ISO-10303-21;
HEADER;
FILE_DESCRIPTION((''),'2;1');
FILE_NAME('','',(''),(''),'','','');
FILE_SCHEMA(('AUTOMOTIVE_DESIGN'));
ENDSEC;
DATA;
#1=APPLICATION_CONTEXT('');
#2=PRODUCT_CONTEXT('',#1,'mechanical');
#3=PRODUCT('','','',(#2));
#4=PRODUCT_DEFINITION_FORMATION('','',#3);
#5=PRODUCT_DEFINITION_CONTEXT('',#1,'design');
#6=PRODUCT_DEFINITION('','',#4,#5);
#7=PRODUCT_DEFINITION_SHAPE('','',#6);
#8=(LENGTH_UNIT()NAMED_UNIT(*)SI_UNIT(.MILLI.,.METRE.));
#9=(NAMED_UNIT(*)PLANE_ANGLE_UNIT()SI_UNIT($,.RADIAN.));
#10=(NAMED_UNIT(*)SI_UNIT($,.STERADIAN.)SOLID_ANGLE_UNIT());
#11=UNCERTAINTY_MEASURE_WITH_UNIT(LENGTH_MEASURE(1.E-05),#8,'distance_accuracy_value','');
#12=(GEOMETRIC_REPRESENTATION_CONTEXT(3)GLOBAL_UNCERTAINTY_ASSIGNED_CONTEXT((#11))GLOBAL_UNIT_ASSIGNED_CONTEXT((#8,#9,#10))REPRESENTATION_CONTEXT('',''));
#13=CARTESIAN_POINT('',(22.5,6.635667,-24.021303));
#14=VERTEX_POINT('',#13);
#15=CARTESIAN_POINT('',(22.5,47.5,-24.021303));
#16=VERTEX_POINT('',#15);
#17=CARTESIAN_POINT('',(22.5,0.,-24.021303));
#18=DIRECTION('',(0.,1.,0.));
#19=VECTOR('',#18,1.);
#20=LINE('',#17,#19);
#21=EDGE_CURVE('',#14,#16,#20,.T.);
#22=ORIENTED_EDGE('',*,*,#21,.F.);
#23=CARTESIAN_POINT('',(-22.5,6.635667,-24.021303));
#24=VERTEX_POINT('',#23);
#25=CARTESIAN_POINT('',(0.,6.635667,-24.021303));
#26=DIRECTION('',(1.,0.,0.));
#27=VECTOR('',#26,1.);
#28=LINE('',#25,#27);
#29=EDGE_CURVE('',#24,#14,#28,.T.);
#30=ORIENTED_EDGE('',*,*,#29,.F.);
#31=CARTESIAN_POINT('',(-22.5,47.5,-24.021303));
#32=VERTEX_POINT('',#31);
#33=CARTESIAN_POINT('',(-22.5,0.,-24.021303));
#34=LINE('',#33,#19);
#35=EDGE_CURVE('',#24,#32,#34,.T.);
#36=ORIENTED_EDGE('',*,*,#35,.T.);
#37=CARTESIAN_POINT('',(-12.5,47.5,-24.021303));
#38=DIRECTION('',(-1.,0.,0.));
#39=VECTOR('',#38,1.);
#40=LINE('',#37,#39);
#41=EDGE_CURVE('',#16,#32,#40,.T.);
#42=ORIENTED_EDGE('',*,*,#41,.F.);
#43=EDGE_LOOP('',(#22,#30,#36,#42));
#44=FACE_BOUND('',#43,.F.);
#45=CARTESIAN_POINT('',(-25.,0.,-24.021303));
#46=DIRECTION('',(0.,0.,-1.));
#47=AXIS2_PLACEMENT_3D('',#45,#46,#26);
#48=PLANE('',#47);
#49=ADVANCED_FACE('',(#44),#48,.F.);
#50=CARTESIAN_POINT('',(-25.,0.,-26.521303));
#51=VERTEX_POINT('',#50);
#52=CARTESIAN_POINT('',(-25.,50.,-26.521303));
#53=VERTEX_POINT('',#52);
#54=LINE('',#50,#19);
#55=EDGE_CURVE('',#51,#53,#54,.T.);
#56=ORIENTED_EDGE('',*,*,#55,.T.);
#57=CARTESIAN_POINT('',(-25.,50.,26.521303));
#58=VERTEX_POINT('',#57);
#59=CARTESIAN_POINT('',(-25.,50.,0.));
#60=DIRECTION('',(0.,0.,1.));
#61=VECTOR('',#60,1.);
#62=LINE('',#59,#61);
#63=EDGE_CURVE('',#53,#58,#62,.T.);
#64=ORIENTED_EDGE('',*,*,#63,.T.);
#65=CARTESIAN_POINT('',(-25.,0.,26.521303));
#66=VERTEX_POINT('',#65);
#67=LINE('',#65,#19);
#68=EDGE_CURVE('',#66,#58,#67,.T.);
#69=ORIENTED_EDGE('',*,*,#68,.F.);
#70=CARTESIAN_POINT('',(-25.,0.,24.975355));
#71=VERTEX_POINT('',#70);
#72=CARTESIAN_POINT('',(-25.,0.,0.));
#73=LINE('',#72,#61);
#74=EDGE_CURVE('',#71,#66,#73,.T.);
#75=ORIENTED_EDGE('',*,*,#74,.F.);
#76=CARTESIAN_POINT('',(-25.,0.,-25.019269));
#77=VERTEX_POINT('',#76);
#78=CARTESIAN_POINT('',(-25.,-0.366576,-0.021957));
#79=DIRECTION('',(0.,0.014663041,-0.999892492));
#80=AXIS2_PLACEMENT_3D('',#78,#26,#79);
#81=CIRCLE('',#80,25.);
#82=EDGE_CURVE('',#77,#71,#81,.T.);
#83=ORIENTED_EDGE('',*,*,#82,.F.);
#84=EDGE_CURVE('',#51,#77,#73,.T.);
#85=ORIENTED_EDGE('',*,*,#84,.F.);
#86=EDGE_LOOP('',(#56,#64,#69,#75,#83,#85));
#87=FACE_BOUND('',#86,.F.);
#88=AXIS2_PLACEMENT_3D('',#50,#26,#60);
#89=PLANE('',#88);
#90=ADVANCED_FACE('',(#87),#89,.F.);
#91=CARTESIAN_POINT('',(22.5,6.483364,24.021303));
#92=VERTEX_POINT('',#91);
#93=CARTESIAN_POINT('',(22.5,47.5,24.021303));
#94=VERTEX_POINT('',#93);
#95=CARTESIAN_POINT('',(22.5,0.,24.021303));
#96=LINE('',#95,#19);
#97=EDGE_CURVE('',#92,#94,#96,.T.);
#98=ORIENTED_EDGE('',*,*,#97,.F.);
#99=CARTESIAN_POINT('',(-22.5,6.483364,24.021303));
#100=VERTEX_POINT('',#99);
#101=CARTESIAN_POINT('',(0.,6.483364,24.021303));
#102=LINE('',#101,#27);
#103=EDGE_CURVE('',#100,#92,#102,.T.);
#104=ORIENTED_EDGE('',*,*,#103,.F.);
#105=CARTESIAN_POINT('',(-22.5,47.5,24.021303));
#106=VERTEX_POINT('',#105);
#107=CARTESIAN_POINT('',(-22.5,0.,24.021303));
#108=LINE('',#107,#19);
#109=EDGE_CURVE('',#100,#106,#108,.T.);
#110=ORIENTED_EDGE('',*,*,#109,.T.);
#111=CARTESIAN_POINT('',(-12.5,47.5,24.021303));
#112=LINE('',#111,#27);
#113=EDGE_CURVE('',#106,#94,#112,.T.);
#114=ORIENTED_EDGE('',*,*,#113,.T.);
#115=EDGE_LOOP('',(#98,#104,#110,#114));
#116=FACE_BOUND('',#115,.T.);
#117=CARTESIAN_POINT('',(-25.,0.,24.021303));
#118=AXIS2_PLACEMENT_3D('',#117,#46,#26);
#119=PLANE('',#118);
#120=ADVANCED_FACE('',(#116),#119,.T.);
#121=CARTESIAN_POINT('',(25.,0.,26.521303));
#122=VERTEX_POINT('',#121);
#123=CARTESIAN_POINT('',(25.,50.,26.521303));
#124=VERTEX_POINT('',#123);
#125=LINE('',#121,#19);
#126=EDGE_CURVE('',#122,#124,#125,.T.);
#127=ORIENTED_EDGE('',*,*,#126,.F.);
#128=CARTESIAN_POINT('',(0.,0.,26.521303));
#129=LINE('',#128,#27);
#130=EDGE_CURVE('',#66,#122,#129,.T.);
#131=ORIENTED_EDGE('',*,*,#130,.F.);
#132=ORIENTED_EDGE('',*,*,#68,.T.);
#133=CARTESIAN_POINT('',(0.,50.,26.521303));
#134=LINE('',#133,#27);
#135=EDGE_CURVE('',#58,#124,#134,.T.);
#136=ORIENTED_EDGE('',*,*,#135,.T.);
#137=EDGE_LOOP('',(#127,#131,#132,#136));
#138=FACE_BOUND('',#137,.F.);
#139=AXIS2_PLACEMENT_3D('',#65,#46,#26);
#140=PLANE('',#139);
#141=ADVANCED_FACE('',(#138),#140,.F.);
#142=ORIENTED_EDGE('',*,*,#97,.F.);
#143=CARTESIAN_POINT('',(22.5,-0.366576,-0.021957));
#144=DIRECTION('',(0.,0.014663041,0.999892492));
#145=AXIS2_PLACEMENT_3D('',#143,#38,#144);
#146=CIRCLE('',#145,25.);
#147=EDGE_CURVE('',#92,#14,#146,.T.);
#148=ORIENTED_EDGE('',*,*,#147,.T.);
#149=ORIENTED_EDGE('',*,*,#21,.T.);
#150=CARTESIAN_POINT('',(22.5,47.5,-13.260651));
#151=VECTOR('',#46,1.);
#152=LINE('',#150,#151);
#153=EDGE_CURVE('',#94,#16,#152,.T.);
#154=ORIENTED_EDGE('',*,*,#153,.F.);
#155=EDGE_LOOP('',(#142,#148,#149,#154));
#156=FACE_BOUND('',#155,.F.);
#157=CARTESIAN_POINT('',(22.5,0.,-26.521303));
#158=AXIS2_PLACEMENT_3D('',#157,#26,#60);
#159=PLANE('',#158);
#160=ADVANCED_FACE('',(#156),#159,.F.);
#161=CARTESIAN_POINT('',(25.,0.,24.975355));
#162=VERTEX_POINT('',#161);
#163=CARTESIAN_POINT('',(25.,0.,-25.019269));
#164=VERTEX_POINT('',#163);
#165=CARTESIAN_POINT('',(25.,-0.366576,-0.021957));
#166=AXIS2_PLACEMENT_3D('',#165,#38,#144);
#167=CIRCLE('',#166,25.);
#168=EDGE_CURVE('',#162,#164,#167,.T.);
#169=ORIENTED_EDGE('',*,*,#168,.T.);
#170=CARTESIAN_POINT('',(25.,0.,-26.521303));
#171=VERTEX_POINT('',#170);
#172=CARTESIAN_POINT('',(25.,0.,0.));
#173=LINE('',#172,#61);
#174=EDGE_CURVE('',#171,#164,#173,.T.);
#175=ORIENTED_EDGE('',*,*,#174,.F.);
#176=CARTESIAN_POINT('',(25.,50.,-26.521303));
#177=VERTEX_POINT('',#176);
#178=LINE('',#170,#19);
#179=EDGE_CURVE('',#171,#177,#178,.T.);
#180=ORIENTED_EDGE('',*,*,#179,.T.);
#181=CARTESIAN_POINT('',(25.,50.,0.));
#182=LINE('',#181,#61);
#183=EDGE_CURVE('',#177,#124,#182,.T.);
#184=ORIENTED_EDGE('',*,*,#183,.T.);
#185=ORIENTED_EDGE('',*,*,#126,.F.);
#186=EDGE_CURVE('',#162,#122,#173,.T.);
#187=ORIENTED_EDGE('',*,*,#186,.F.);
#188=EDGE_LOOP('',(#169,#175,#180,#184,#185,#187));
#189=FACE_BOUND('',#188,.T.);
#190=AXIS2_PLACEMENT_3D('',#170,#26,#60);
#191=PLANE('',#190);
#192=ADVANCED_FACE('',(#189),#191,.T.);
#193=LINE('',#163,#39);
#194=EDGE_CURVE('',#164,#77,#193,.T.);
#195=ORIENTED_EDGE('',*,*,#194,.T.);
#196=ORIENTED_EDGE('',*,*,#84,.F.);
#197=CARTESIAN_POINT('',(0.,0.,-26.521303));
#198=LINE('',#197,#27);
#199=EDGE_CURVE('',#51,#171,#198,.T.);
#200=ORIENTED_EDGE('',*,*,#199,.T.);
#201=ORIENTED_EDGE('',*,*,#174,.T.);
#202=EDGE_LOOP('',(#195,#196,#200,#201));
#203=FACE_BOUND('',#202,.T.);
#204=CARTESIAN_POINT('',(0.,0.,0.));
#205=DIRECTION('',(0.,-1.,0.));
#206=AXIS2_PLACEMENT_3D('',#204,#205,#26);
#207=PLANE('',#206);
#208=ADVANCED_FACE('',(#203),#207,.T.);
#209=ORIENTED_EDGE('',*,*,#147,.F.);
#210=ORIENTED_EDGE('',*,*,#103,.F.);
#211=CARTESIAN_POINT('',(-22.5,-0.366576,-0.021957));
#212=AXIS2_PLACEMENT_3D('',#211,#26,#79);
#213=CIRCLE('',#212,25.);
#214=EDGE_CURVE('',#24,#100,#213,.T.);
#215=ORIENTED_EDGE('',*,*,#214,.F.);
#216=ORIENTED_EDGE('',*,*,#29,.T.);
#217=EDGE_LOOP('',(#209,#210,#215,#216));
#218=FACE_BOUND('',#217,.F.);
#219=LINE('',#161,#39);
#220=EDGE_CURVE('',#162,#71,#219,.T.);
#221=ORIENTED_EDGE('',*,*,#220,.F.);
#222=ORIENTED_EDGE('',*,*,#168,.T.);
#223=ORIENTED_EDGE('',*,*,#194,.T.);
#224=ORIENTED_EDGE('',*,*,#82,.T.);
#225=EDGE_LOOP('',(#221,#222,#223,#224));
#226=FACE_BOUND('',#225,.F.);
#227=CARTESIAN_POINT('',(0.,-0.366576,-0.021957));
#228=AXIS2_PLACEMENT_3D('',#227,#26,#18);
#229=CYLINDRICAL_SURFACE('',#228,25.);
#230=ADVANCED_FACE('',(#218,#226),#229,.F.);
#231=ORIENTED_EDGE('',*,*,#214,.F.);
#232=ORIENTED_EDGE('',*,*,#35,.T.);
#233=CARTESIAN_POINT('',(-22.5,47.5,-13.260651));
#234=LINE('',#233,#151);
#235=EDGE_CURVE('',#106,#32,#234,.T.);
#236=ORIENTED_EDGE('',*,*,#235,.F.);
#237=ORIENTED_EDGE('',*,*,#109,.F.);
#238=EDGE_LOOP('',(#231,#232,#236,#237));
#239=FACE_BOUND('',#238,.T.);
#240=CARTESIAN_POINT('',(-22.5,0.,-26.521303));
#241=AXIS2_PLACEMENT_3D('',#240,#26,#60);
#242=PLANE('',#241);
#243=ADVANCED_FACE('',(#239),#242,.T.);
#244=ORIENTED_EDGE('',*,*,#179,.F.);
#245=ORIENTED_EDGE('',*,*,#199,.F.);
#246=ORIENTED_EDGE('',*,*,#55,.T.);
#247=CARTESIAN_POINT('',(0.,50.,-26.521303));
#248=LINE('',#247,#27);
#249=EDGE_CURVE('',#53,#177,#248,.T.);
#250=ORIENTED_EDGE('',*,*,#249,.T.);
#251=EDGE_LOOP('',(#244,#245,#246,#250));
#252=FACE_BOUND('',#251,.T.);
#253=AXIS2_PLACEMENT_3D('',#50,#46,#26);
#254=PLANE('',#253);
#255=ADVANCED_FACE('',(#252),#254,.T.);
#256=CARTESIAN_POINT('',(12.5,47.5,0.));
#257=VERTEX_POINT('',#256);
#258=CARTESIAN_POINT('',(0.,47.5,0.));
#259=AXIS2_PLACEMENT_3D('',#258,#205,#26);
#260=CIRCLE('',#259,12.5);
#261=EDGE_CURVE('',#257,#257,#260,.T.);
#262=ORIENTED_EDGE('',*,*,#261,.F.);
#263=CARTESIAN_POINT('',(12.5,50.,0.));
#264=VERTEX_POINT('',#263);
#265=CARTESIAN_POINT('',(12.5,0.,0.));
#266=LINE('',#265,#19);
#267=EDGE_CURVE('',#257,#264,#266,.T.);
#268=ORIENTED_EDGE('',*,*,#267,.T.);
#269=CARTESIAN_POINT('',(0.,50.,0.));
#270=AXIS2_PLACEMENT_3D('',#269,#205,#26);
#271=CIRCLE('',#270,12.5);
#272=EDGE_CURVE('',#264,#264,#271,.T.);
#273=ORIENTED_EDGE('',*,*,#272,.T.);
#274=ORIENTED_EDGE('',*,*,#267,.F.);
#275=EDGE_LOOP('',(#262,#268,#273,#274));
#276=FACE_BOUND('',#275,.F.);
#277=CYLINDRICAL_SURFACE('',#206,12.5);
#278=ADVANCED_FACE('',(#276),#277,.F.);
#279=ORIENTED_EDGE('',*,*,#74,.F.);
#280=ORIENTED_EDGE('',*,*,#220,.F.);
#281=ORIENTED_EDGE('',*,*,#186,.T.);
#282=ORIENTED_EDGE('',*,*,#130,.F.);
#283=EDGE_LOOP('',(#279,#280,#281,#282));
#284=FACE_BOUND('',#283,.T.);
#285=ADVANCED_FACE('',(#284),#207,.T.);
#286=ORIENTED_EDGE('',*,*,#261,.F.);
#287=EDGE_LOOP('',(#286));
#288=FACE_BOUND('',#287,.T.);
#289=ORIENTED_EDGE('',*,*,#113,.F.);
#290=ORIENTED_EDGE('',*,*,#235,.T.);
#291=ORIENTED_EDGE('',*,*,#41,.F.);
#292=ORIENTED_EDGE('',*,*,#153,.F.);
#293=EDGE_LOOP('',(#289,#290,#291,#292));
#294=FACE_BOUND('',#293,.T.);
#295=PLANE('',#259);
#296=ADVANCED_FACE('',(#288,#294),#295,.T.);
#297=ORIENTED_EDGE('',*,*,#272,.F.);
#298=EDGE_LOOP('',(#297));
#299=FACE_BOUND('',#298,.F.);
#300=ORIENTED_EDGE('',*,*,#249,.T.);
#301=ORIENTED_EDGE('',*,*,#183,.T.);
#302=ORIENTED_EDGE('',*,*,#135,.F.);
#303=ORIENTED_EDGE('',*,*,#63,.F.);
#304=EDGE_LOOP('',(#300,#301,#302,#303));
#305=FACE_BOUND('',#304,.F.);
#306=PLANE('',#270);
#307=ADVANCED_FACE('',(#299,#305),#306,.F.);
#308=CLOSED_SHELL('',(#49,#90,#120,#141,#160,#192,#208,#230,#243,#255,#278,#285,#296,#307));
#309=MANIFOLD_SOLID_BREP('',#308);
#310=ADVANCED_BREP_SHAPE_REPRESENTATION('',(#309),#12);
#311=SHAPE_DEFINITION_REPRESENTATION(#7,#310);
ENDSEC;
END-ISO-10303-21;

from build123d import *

# Parameters (mm, degrees)
F0_W     = 50
F0_H     = 53.0426052851
F1_DEPTH = 50
F2_R     = 25
F3_DEPTH = 25
F4_DEPTH = 25
F5_T     = 2.5
F6_R     = 12.5
F7_DEPTH = 50


# Not quite as in the source:
# - a shell that OpenCascade refuses in one call is made with other operations: the cavity is built on its own and cut out


with BuildPart() as f1:
    # F0 (on Front) → F1 (new body)
    with BuildSketch(Plane.XZ):
        Rectangle(F0_W, F0_H)
    extrude(amount=-F1_DEPTH)

    # F2 (on Right) → F3 (cut)
    with BuildSketch(Plane.YZ):
        with Locations((-0.3665760159, -0.021956861)):
            Circle(F2_R)
    extrude(amount=F3_DEPTH, mode=Mode.SUBTRACT)

    # F2 (on Right) → F4 (cut)
    with BuildSketch(Plane.YZ):
        with Locations((-0.3665760159, -0.021956861)):
            Circle(F2_R)
    extrude(amount=-F4_DEPTH, mode=Mode.SUBTRACT)

    # F5: shell of thickness 2.5, made by hand


with BuildPart() as f5_core1:
    # F5_t2: copy of F1
    add(f1.part)

    # the walls: a layer under each face that stays
    f5_faces = [f5_core1.faces().sort_by_distance(p)[0] for p in [
        (-25, 25, 0),
        (25, 25, 0),
        (0, 0, -25.7702858998),
        (0, 25, -26.5213026426),
        (0, 50, 0),
        (0, 25, 26.5213026426),
        (0, 0, 25.7483290388),
    ]]
    thicken(f5_faces, amount=-F5_T, mode=Mode.SUBTRACT)


with BuildPart() as f1_1:
    add(f1.part)

    # what is left inside the walls is the cavity
    f5_cavity = [f5_core1.part.solids().sort_by_distance(p)[0] for p in [
        (-7.5, 24.658298, 0.057376),
    ]]
    add(f5_cavity, mode=Mode.SUBTRACT)

    # F6 (on Front) → F7 (cut)
    with BuildSketch(Plane.XZ):
        Circle(F6_R)
    extrude(amount=-F7_DEPTH, mode=Mode.SUBTRACT)


solid = f1_1.part
